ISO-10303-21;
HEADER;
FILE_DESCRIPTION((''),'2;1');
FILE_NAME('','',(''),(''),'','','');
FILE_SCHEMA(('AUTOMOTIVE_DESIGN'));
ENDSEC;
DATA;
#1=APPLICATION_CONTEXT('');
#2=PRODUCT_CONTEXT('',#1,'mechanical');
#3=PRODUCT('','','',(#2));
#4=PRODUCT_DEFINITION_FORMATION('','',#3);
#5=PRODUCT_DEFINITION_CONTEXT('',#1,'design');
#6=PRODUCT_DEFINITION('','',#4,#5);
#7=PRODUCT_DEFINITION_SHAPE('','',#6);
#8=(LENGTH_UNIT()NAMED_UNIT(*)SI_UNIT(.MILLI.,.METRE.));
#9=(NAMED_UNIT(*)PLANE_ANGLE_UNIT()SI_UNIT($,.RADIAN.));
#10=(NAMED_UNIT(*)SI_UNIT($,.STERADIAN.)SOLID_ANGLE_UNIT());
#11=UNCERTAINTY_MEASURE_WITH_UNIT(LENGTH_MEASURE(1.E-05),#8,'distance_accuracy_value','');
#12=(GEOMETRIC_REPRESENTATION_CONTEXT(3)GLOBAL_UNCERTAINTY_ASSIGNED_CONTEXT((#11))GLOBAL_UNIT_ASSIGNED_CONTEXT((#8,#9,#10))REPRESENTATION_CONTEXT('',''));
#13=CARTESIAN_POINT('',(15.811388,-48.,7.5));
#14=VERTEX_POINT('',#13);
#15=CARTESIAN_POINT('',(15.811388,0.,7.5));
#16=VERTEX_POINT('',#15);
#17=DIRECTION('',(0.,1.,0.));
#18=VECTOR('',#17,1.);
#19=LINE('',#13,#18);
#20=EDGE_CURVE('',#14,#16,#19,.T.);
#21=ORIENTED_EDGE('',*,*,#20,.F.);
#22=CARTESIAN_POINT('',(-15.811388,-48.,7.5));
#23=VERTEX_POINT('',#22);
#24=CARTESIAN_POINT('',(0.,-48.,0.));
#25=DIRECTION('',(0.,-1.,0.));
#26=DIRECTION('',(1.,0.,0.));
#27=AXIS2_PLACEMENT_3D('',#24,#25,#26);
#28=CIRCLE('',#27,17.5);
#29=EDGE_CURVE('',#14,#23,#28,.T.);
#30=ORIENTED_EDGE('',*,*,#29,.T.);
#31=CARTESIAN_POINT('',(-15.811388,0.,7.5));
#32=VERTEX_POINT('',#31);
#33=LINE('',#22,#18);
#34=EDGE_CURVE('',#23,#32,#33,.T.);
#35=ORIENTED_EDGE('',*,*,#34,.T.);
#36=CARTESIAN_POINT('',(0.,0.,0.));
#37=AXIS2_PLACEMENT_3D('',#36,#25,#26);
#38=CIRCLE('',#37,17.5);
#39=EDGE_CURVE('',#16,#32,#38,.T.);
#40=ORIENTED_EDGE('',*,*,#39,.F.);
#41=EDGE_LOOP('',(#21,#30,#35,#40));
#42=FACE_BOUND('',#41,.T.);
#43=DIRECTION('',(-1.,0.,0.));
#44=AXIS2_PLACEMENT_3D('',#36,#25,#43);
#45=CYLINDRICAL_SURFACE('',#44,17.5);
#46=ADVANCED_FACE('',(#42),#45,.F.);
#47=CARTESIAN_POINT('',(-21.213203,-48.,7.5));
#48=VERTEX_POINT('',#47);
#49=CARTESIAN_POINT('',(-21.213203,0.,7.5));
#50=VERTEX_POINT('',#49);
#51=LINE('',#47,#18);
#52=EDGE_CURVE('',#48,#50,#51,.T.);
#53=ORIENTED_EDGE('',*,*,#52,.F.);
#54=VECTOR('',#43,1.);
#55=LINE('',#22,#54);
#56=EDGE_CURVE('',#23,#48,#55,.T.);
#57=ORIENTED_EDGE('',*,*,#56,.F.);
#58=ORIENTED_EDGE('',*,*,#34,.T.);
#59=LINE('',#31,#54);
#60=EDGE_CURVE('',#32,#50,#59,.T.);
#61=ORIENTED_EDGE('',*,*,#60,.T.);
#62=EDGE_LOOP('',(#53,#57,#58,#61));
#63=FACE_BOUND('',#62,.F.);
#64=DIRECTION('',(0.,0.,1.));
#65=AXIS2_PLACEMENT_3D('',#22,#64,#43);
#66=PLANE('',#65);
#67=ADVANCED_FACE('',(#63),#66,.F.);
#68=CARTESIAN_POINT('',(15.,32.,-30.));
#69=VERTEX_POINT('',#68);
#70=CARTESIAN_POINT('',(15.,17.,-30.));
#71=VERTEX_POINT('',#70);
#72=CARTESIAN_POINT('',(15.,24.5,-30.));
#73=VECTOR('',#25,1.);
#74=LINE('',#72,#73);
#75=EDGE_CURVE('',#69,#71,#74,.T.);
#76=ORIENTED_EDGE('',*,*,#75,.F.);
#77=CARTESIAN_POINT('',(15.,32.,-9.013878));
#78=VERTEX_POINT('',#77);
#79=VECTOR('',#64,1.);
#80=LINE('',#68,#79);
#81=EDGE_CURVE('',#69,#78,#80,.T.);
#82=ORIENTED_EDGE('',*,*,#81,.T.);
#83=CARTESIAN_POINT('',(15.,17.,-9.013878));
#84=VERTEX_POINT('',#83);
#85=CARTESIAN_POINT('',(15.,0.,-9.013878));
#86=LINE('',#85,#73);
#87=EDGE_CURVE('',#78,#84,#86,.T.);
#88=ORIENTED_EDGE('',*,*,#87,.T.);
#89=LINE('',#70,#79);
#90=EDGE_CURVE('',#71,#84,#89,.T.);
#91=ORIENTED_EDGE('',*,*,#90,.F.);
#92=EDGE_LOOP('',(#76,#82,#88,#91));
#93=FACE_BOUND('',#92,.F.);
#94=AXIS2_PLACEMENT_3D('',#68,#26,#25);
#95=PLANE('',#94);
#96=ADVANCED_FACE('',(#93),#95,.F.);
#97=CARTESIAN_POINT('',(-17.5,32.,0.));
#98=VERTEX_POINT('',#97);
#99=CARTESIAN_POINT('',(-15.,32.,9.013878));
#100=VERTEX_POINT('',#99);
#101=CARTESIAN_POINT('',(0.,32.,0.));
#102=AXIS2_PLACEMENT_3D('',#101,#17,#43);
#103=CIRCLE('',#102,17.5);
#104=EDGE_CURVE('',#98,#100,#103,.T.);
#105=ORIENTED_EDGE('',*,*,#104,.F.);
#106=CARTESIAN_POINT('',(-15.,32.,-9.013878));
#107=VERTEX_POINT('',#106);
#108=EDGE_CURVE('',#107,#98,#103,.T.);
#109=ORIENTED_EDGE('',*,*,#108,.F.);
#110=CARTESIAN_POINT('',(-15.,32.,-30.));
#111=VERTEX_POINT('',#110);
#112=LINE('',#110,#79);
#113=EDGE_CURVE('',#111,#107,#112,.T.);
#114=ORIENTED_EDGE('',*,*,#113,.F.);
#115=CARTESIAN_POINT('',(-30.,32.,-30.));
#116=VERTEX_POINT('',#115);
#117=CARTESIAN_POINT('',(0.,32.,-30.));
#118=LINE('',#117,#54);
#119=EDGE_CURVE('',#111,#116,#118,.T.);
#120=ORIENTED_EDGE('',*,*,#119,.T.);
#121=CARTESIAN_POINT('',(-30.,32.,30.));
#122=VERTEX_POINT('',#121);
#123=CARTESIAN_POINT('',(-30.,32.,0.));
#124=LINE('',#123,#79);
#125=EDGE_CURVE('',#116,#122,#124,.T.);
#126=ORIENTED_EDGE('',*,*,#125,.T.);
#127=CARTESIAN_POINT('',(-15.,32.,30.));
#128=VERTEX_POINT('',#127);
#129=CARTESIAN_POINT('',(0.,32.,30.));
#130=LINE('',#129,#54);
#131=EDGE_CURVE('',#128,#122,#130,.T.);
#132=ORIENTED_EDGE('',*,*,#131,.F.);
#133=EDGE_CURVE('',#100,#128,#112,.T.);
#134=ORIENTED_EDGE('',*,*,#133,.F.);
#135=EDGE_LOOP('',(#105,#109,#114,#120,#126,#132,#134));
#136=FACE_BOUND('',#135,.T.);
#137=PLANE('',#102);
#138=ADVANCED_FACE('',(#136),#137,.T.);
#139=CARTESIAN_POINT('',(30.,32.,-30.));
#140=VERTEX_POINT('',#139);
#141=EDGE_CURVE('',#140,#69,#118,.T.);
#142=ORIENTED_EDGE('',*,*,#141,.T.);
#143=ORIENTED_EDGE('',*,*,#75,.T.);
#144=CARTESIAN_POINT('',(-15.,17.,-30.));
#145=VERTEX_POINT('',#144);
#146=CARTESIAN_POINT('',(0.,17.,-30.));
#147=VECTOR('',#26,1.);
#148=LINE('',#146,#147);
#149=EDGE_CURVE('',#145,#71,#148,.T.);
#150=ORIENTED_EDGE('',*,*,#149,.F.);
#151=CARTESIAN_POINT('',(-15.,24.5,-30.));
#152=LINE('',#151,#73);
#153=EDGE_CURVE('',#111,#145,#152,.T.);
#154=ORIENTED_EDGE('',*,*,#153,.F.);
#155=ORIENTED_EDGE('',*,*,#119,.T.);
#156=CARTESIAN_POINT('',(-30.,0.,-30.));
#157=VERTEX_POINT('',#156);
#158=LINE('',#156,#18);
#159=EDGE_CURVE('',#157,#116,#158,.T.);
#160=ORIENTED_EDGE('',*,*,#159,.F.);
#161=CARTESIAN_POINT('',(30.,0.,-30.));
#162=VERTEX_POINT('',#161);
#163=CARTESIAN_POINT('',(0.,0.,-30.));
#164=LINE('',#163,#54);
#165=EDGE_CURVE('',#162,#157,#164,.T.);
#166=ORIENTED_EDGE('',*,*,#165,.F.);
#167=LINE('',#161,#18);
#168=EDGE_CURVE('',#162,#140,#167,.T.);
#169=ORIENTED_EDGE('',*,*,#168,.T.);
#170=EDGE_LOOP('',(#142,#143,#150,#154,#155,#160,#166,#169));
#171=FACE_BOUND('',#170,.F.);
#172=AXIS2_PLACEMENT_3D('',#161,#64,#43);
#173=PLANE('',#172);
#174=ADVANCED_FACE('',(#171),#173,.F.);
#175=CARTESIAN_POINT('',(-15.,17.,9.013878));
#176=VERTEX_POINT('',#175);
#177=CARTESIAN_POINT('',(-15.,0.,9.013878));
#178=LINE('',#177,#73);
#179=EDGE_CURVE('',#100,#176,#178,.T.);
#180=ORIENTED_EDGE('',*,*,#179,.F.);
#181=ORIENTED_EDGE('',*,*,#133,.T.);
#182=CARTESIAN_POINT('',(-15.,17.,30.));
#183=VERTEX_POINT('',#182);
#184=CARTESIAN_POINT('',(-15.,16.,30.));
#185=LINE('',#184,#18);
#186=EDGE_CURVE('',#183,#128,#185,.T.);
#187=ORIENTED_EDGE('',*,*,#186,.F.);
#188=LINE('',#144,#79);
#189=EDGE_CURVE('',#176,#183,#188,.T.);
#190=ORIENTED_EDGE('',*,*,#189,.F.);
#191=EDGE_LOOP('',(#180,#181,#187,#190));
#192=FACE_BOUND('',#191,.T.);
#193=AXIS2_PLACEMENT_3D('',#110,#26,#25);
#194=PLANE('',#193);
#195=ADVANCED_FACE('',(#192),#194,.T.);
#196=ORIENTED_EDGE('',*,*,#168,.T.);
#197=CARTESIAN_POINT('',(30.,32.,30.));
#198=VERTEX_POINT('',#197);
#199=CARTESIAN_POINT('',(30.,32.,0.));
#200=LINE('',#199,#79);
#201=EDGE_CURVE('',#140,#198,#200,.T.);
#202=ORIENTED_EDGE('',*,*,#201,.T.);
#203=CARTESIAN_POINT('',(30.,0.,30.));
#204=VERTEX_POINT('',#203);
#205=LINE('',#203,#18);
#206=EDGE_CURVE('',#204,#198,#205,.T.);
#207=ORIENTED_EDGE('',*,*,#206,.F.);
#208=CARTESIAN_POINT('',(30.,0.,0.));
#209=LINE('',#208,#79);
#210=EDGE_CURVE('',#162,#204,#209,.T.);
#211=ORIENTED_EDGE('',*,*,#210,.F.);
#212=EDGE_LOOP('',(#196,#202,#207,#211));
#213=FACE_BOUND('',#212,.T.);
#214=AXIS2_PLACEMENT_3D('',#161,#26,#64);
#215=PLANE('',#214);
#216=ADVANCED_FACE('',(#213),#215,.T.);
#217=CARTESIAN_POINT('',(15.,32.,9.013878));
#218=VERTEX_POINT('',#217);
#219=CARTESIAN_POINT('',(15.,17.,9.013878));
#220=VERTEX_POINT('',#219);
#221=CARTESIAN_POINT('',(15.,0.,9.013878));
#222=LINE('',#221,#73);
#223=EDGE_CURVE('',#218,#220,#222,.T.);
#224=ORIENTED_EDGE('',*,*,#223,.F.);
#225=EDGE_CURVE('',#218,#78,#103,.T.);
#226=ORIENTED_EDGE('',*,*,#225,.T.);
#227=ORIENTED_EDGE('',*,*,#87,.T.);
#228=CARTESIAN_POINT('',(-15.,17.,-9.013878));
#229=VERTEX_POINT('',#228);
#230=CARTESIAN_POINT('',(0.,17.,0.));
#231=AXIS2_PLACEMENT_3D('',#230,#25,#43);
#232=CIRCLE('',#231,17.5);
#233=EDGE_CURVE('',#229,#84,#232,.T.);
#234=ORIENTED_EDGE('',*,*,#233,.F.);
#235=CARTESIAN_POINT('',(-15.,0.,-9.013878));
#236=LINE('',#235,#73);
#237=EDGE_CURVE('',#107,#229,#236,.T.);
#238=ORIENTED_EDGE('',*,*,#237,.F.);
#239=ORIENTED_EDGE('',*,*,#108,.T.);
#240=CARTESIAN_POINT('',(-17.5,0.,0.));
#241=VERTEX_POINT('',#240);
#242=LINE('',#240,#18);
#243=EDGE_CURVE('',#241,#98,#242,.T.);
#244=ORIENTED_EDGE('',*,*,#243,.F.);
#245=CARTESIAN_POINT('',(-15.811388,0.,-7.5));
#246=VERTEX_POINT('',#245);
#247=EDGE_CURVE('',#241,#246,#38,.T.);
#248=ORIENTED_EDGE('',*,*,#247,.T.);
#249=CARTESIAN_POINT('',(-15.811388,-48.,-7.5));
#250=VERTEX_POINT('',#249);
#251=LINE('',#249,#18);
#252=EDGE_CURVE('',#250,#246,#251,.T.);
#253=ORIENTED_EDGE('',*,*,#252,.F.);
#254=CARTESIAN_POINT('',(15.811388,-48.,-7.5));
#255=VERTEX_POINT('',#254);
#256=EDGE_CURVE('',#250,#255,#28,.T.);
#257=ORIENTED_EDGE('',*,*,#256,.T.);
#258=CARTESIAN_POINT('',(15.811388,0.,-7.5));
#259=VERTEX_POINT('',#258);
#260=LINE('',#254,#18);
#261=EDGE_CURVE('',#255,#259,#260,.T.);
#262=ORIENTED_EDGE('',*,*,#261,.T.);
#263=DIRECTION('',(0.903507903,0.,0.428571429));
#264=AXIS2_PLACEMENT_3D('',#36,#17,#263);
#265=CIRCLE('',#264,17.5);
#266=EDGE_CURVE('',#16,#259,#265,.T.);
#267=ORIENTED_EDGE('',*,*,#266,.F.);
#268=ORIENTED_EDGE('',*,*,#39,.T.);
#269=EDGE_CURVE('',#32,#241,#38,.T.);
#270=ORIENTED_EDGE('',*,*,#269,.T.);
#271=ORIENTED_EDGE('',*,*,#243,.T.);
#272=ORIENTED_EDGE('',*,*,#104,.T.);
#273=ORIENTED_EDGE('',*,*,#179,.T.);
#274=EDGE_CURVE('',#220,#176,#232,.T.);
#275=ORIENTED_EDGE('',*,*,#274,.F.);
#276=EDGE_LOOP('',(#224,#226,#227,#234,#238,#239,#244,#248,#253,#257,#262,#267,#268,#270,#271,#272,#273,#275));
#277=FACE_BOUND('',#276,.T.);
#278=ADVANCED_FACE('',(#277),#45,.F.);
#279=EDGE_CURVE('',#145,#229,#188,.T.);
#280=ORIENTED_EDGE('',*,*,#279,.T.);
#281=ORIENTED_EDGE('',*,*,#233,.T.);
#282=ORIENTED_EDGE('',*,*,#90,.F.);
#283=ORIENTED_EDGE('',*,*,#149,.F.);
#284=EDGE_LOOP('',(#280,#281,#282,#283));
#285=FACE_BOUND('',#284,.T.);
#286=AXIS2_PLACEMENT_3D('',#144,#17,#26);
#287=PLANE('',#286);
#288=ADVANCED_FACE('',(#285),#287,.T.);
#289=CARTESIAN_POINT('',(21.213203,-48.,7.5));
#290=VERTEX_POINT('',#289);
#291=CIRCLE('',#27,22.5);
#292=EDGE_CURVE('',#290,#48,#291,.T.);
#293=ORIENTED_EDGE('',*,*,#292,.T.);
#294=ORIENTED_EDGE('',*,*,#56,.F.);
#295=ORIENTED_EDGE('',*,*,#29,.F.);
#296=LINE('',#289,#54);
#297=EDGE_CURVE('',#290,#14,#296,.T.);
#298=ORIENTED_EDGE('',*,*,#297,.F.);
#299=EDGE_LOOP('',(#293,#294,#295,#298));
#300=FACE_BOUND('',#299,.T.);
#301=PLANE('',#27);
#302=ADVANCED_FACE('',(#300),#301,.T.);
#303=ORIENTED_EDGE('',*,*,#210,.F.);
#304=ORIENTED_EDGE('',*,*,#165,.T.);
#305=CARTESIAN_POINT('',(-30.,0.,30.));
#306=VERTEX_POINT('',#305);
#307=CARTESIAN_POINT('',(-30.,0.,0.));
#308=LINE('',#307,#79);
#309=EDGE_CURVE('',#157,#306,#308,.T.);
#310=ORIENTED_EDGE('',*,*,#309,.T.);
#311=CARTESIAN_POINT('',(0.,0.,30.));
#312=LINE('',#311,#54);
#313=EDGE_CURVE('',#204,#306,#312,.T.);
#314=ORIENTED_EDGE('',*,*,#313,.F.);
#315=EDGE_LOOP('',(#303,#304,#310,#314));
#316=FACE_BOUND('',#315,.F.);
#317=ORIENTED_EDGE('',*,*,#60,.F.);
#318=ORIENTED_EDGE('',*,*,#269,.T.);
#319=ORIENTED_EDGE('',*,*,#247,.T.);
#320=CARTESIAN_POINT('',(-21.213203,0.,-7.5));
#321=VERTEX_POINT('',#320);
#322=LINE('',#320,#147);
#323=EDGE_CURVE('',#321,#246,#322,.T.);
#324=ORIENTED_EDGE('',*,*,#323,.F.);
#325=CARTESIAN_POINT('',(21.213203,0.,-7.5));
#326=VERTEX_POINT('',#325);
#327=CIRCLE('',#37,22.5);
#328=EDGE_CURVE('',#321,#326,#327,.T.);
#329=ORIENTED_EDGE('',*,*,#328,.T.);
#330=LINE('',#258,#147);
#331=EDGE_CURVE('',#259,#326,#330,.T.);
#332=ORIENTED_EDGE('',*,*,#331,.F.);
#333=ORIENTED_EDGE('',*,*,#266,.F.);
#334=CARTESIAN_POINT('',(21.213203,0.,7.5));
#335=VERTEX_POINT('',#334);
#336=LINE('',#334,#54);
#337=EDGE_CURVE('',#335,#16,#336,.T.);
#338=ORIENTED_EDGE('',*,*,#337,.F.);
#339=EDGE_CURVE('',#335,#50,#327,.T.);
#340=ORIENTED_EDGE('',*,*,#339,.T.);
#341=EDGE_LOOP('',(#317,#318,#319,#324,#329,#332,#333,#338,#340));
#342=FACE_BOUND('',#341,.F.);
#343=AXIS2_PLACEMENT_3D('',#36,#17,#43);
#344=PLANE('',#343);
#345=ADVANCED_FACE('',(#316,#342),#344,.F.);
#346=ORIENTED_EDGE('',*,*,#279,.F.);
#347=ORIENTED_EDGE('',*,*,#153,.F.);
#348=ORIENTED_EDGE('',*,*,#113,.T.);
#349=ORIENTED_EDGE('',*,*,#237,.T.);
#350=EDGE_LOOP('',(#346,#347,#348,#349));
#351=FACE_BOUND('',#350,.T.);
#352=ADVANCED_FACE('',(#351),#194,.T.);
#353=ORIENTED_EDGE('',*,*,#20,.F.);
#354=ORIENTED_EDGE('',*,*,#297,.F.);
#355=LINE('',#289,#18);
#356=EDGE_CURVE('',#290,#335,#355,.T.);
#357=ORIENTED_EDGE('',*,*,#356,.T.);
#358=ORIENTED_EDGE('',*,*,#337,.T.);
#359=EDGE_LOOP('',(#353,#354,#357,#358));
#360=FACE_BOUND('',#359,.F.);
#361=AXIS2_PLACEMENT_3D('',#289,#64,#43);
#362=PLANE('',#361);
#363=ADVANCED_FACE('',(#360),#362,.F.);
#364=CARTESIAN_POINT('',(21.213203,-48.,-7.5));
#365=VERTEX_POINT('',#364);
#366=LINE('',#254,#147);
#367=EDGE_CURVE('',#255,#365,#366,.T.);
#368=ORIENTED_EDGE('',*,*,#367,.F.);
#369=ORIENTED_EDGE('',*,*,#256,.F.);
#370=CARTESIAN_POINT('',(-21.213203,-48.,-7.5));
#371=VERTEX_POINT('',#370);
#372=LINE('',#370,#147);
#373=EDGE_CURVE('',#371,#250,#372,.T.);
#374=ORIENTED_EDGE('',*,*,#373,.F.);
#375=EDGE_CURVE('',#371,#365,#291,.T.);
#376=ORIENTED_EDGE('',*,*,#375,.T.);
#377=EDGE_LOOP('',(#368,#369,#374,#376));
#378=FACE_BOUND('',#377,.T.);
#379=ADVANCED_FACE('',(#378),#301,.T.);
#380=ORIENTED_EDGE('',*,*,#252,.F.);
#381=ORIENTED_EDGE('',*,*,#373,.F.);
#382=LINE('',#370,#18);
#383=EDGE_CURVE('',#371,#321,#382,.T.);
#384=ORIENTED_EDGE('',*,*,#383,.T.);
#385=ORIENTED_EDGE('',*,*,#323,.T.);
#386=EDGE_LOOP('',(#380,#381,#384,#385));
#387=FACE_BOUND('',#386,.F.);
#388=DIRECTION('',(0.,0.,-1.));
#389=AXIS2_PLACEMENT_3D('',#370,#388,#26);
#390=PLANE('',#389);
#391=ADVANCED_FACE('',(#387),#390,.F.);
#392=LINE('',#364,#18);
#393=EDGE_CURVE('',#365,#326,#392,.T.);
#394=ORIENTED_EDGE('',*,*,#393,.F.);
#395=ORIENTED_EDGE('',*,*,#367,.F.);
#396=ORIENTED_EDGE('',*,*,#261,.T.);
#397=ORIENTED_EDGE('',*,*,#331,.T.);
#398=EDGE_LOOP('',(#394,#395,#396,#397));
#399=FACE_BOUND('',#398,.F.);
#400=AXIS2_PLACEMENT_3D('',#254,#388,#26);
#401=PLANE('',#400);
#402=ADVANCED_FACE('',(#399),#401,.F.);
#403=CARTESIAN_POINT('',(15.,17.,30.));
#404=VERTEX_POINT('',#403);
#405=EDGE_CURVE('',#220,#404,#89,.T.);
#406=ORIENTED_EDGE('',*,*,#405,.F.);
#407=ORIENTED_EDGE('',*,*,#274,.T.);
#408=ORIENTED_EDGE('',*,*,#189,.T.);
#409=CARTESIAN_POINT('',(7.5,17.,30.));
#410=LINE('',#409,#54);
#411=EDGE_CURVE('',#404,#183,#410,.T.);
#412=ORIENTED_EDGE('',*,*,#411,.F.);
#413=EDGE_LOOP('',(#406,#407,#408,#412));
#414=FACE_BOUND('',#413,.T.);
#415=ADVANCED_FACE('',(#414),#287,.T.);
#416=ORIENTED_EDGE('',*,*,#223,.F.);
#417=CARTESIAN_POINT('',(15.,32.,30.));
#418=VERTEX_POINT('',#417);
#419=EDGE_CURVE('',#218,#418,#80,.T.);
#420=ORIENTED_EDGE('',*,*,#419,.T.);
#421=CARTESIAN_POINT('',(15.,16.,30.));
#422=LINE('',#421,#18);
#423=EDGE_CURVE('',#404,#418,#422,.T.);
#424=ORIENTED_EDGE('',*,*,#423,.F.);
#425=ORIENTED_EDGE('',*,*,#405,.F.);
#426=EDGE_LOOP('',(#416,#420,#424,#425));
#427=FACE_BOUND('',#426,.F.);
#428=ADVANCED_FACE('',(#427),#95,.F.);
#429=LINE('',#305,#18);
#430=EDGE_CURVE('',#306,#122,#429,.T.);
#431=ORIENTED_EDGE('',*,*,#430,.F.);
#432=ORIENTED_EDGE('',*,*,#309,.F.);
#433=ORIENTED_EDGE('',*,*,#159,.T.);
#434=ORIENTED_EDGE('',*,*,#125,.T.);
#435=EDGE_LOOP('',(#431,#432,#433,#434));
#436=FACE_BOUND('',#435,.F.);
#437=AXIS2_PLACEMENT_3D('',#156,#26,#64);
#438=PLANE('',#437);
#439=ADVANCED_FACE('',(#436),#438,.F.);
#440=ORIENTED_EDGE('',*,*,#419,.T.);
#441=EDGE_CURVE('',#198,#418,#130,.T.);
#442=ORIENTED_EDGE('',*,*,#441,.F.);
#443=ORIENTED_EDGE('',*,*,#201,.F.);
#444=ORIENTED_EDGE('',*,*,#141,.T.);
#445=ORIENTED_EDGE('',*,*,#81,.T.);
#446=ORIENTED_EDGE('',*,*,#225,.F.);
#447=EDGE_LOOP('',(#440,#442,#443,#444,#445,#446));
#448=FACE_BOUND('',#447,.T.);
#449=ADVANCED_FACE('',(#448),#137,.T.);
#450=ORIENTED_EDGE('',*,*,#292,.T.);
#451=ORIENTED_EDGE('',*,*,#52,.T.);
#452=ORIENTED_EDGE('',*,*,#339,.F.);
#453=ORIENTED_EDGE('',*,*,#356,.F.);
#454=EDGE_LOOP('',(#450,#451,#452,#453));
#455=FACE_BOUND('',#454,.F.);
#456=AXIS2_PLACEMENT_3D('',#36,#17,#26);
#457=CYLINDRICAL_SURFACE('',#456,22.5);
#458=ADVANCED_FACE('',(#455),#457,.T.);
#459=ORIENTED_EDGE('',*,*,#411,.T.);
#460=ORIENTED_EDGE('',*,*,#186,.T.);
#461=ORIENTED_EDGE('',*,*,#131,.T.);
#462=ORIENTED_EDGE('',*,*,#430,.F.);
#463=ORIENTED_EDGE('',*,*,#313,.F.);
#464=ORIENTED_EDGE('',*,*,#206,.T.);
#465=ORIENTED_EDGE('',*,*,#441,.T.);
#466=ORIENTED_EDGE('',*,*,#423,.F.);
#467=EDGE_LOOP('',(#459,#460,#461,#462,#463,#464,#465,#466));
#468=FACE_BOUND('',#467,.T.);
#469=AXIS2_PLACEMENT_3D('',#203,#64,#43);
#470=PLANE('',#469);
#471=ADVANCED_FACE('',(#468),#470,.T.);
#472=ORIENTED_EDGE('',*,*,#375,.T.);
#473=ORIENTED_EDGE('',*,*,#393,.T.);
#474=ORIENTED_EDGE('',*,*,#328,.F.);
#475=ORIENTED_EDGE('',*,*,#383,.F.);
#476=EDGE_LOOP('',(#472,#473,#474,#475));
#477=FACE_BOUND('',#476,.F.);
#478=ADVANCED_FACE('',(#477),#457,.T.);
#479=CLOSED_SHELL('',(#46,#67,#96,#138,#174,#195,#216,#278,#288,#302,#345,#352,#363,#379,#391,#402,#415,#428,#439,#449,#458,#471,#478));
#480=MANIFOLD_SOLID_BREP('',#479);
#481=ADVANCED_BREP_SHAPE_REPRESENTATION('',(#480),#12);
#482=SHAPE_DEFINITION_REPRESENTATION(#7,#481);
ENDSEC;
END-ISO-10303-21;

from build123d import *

# Parameters (mm, degrees)
F0_R     = 22.5
F0_R_2   = 17.5
F1_DEPTH = 48
F2_W     = 60
F2_H     = 60
F2_R     = 22.5
F2_R_2   = 17.5
F3_DEPTH = 32
F4_W     = 30
F4_H     = 15
F5_DEPTH = 60.001
F7_DEPTH = 48


with BuildPart() as f1:
    # F0 (on Front) → F1 (new body)
    with BuildSketch(Plane.XZ):
        Circle(F0_R)
        Circle(F0_R_2, mode=Mode.SUBTRACT)
    extrude(amount=F1_DEPTH)

    # F2 (on face) → F3 (join)
    with BuildSketch(Plane(origin=(0, 0, 0), x_dir=(-1, 0, 0), z_dir=(0, 1, 0))):
        Rectangle(F2_W, F2_H)
        Circle(F2_R, mode=Mode.SUBTRACT)
        Circle(F2_R)
        Circle(F2_R_2, mode=Mode.SUBTRACT)
    extrude(amount=F3_DEPTH)

    # F4 (on face) → F5 (cut, through all)
    with BuildSketch(Plane(origin=(0, 0, -30), x_dir=(1, 0, 0), z_dir=(0, 0, -1))):
        with Locations((0, -24.5)):
            Rectangle(F4_W, F4_H)
    extrude(amount=-F5_DEPTH, mode=Mode.SUBTRACT)

    # F6 (on face) → F7 (cut, through all)
    with BuildSketch(Plane.XZ.offset(48)):
        with BuildLine():
            ThreePointArc((-21.2132034356, 7.5), (-22.5, 0), (-21.2132034356, -7.5))
            Line((-21.2132034356, -7.5), (-15.8113883008, -7.5))
            ThreePointArc((-15.8113883008, -7.5), (-17.5, 0), (-15.8113883008, 7.5))
            Line((-15.8113883008, 7.5), (-21.2132034356, 7.5))
        make_face()
        with BuildLine():
            Line((15.8113883008, -7.5), (21.2132034356, -7.5))
            ThreePointArc((21.2132034356, -7.5), (22.1759675922, -3.8047945213), (22.5, 0))
            ThreePointArc((22.5, 0), (22.1759675922, 3.8047945213), (21.2132034356, 7.5))
            Line((21.2132034356, 7.5), (15.8113883008, 7.5))
            ThreePointArc((15.8113883008, 7.5), (17.0726286093, 3.843872054), (17.5, 0))
            ThreePointArc((17.5, 0), (17.0726286093, -3.843872054), (15.8113883008, -7.5))
        make_face()
    extrude(amount=-F7_DEPTH, mode=Mode.SUBTRACT)


solid = f1.part
